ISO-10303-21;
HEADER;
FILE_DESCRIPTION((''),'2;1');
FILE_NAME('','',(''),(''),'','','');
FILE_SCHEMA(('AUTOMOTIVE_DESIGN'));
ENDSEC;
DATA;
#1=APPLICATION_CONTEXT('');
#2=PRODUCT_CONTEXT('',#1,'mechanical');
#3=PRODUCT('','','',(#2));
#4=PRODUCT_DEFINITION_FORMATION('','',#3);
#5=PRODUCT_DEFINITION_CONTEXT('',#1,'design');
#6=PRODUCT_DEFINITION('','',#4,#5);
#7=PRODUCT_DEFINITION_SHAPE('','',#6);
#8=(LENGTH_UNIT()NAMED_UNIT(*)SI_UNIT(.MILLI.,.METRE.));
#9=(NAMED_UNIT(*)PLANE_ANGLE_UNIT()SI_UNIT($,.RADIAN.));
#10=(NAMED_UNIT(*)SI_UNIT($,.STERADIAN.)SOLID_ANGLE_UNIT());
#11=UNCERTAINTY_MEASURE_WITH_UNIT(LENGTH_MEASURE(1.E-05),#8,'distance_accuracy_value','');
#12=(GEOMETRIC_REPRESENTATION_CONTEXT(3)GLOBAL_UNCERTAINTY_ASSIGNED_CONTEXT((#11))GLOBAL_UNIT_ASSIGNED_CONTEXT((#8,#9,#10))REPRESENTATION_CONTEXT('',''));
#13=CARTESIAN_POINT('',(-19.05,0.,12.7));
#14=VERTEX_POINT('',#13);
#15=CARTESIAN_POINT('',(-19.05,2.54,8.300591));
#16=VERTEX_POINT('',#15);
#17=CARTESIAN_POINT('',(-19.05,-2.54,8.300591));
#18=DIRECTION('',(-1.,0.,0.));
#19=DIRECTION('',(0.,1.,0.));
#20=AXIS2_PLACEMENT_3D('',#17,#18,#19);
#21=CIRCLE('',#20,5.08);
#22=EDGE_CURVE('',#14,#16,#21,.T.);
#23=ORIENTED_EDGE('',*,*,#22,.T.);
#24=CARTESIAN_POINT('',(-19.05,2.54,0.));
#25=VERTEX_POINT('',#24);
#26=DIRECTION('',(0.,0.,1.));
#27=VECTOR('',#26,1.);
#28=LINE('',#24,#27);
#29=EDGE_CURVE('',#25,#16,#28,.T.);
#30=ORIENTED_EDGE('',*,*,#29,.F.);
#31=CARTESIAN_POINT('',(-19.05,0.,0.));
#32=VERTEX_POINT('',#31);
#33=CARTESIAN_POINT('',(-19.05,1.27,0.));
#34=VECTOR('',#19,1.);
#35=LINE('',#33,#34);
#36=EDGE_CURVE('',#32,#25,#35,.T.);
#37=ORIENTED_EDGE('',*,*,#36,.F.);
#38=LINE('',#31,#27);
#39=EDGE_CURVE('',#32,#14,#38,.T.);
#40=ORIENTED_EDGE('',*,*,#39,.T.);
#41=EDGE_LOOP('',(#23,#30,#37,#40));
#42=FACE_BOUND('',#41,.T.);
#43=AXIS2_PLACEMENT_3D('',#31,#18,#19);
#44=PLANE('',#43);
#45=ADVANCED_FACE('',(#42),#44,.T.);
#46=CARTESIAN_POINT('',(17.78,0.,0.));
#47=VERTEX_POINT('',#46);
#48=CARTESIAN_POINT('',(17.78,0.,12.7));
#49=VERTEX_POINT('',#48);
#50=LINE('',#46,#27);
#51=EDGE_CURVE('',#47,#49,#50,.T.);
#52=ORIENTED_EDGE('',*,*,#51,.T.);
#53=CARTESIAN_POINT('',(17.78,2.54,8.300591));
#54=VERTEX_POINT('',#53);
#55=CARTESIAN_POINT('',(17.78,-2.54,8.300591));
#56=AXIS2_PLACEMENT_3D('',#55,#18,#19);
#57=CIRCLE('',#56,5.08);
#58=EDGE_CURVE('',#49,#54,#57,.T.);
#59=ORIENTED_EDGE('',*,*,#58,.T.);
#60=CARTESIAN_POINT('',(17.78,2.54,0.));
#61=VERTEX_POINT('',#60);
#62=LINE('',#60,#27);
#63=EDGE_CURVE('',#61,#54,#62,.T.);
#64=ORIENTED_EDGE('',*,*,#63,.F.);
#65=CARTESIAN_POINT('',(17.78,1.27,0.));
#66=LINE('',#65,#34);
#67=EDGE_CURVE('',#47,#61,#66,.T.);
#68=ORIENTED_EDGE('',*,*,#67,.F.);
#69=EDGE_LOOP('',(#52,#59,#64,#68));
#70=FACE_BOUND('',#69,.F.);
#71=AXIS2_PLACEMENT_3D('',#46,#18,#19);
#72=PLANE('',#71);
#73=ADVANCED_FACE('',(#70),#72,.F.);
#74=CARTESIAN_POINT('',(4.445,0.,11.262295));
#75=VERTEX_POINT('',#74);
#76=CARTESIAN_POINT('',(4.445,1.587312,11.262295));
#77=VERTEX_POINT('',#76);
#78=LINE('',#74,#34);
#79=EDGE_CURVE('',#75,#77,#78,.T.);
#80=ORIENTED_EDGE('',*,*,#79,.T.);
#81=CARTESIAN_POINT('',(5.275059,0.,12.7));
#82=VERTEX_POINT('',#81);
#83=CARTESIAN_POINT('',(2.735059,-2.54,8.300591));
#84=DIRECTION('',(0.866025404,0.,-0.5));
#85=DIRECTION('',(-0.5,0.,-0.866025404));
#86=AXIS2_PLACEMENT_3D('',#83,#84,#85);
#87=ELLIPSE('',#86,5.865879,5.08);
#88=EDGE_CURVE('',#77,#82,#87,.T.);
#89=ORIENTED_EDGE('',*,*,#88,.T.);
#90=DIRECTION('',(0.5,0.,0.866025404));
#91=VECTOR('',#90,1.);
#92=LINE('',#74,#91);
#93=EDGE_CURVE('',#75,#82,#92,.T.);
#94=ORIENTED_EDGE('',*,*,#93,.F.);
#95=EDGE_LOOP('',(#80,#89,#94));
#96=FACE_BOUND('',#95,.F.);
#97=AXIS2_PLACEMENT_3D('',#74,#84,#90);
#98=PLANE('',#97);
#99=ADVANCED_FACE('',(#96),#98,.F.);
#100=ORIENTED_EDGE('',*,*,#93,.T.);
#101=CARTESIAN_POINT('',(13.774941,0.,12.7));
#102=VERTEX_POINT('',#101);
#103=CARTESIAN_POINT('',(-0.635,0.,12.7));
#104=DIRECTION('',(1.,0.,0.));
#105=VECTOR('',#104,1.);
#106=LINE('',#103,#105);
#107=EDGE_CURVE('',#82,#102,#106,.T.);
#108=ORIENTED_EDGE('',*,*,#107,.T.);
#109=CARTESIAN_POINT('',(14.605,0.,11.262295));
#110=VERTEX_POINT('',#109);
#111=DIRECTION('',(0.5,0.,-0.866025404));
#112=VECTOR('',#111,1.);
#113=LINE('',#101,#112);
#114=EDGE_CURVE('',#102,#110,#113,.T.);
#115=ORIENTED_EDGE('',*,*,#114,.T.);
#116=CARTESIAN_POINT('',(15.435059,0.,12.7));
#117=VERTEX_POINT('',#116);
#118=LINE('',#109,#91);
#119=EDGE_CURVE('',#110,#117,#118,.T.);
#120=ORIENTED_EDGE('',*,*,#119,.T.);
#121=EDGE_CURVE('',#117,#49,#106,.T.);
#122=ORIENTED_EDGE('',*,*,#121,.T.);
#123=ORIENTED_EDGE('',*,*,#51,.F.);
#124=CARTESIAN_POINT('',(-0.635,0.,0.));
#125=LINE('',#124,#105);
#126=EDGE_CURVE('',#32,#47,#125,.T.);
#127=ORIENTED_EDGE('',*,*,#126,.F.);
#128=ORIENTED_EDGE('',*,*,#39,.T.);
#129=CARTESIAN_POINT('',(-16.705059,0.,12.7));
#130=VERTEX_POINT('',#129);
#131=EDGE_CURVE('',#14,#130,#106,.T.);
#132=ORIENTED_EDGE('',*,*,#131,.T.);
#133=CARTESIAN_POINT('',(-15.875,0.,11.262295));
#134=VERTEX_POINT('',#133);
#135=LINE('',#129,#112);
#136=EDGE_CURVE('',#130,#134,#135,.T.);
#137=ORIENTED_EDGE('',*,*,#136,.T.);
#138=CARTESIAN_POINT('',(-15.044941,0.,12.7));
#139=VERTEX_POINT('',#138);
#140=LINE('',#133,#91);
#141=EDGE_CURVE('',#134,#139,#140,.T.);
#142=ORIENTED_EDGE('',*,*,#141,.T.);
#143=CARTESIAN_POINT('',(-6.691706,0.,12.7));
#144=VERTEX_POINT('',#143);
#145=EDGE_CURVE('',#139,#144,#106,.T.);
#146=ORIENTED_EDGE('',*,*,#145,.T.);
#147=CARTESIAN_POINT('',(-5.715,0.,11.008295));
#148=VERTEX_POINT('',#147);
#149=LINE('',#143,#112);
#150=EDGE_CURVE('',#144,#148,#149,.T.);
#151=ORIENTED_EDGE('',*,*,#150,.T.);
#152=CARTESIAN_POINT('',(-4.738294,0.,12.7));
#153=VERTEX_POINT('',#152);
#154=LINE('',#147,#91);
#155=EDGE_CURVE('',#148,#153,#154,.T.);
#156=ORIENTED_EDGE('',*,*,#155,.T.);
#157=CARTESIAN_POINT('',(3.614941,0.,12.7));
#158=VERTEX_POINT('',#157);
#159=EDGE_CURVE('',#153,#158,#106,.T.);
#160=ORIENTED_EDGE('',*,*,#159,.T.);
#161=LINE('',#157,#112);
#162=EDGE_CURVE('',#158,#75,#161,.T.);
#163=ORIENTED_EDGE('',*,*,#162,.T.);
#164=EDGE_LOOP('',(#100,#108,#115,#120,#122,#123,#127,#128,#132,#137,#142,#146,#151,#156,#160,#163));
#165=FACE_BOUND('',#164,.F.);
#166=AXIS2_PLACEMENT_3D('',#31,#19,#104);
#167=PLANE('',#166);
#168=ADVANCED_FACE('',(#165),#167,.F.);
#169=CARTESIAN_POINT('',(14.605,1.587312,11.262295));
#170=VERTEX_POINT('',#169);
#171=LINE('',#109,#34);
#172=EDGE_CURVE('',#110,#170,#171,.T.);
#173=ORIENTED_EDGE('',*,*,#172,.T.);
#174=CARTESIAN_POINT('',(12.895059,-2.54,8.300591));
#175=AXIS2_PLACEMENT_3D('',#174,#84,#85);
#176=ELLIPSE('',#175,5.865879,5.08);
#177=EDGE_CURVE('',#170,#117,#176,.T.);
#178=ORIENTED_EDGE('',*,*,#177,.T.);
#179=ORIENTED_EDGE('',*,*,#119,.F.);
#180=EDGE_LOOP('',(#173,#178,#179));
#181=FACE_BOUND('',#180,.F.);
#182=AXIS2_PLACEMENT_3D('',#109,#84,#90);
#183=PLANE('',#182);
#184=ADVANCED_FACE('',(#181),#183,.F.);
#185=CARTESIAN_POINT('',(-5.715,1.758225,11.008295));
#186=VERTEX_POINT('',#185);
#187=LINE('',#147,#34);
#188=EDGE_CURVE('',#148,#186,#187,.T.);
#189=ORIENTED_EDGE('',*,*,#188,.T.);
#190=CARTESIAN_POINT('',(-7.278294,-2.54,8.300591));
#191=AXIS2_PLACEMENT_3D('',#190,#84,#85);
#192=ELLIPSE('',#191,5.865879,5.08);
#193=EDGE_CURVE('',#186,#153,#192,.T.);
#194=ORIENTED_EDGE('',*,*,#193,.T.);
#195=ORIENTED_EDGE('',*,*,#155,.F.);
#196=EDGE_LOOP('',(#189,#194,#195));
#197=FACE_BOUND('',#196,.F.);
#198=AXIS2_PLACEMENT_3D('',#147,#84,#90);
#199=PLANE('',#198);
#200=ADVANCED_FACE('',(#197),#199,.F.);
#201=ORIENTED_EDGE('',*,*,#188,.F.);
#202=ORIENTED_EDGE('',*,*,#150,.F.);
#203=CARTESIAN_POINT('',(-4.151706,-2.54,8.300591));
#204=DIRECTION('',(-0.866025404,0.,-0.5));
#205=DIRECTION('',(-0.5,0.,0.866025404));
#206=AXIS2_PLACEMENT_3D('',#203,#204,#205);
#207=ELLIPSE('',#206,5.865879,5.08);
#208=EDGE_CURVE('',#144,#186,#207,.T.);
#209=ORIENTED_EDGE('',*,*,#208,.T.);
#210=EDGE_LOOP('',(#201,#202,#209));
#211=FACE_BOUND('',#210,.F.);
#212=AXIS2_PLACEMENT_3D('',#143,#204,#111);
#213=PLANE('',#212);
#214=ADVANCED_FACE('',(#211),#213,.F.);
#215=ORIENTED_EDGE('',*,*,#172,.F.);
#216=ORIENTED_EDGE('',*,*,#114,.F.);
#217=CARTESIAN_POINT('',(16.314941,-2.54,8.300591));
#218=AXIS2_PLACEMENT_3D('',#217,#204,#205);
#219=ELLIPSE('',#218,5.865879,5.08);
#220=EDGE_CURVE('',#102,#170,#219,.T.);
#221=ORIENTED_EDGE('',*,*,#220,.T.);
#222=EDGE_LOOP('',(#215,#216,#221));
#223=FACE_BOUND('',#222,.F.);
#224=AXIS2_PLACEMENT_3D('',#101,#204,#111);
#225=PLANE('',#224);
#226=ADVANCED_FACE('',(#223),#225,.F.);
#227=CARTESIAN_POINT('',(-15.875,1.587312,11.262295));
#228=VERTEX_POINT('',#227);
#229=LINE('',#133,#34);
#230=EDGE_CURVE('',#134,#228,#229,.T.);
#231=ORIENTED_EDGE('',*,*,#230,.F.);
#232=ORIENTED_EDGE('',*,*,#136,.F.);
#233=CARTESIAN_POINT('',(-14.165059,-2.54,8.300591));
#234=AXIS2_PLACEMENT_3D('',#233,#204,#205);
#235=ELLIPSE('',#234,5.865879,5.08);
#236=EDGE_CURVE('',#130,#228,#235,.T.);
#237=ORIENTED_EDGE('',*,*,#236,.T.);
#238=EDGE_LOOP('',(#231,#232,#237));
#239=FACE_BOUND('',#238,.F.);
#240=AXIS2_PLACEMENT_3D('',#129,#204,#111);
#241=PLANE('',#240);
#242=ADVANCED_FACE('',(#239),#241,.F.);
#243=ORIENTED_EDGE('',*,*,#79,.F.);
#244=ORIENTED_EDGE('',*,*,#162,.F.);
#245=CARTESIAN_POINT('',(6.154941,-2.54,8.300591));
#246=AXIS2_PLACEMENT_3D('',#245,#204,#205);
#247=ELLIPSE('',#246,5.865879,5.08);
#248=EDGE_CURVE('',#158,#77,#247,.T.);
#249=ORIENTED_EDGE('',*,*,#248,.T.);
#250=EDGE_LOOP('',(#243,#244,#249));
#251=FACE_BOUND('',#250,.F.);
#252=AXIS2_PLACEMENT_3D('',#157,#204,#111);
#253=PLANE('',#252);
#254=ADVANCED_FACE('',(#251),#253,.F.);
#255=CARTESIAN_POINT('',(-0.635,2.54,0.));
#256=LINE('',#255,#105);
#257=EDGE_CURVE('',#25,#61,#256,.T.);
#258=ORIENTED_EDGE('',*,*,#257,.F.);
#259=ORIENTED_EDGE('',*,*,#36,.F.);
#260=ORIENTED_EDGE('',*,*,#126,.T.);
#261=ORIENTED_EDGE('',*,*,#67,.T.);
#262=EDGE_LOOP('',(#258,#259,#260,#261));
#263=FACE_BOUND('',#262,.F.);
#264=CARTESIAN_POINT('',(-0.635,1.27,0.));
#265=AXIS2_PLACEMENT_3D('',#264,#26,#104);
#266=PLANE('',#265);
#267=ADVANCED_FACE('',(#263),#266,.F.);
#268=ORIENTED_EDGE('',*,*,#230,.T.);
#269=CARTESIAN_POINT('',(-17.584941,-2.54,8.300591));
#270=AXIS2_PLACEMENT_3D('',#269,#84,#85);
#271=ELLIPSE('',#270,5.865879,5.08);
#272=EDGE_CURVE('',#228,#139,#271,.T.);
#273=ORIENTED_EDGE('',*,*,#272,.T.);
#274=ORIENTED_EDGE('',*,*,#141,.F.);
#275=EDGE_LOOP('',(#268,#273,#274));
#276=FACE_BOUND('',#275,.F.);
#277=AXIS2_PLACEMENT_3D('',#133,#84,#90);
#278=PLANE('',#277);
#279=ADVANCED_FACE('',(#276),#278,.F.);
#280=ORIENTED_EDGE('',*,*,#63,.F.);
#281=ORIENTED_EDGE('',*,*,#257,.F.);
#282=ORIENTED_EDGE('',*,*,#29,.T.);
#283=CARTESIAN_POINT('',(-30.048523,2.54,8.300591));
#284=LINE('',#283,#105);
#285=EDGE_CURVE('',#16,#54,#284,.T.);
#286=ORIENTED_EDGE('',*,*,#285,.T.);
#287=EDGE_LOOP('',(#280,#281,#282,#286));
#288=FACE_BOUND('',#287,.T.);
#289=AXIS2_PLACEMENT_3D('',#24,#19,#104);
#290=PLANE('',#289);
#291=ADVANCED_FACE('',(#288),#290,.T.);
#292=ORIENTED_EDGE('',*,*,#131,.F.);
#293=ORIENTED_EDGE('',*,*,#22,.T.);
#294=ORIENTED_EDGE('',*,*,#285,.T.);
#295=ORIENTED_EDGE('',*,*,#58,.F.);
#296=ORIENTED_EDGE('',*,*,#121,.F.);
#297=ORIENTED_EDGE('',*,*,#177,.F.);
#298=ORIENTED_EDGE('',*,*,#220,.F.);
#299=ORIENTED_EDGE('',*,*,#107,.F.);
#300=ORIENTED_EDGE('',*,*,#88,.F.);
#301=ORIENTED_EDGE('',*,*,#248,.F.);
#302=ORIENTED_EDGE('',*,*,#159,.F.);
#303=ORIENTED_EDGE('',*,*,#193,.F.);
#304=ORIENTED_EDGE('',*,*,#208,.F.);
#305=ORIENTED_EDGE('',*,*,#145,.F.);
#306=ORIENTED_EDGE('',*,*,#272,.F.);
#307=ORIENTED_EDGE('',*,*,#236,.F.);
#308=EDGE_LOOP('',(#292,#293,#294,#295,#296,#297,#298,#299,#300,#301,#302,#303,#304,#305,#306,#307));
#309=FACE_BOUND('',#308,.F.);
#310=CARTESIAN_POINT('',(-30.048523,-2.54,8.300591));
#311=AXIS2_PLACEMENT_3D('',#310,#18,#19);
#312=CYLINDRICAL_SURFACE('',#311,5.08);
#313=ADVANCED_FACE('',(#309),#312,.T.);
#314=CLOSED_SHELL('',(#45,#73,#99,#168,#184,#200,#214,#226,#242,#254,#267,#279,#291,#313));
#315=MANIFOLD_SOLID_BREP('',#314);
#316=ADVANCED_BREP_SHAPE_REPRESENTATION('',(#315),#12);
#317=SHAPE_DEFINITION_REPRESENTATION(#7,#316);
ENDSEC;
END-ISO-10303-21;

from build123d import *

# Parameters (mm, degrees)
F0_W        = 36.83
F0_H        = 2.54
F1_DEPTH    = 12.7
F3_T1_DEPTH = 58.8270452561
F4_DEPTH    = 25.4


# Not quite as in the source:
# - a fillet or chamfer that OpenCascade refuses, or shapes differently, is made with other operations: its cross-section is extruded or revolved along the edge and cut away or added


with BuildPart() as f1:
    # F0 (on Top) → F1 (new body)
    with BuildSketch(Plane.XY):
        with Locations((-0.635, 1.27)):
            Rectangle(F0_W, F0_H)
    extrude(amount=F1_DEPTH)

    # F3: fillet of radius 5.08 on 1 edges, made by hand

    # F3_s2 → F3_t1 (cut)
    with BuildSketch(Plane.YZ.offset(-30.0485226281)):
        with BuildLine():
            ThreePointArc((2.54, 8.3005909488), (1.8594090512, 10.8405909488), (0, 12.7))
            Line((0, 12.7), (2.54, 12.7))
            Line((2.54, 12.7), (2.54, 8.3005909488))
        make_face()
    extrude(amount=F3_T1_DEPTH, mode=Mode.SUBTRACT)

    # F2 (on face) → F4 (cut)
    with BuildSketch(Plane.XZ):
        Polygon((-15.875, 11.2622954744), (-15.0449409051, 12.7), (-16.7050590949, 12.7), align=None)
        Polygon((-4.7382939367, 12.7), (-6.6917060633, 12.7), (-5.715, 11.0082954744), align=None)
        Polygon((5.2750590949, 12.7), (3.6149409051, 12.7), (4.445, 11.2622954744), align=None)
        Polygon((15.4350590949, 12.7), (13.7749409051, 12.7), (14.605, 11.2622954744), align=None)
    extrude(amount=-F4_DEPTH, mode=Mode.SUBTRACT)


solid = f1.part
